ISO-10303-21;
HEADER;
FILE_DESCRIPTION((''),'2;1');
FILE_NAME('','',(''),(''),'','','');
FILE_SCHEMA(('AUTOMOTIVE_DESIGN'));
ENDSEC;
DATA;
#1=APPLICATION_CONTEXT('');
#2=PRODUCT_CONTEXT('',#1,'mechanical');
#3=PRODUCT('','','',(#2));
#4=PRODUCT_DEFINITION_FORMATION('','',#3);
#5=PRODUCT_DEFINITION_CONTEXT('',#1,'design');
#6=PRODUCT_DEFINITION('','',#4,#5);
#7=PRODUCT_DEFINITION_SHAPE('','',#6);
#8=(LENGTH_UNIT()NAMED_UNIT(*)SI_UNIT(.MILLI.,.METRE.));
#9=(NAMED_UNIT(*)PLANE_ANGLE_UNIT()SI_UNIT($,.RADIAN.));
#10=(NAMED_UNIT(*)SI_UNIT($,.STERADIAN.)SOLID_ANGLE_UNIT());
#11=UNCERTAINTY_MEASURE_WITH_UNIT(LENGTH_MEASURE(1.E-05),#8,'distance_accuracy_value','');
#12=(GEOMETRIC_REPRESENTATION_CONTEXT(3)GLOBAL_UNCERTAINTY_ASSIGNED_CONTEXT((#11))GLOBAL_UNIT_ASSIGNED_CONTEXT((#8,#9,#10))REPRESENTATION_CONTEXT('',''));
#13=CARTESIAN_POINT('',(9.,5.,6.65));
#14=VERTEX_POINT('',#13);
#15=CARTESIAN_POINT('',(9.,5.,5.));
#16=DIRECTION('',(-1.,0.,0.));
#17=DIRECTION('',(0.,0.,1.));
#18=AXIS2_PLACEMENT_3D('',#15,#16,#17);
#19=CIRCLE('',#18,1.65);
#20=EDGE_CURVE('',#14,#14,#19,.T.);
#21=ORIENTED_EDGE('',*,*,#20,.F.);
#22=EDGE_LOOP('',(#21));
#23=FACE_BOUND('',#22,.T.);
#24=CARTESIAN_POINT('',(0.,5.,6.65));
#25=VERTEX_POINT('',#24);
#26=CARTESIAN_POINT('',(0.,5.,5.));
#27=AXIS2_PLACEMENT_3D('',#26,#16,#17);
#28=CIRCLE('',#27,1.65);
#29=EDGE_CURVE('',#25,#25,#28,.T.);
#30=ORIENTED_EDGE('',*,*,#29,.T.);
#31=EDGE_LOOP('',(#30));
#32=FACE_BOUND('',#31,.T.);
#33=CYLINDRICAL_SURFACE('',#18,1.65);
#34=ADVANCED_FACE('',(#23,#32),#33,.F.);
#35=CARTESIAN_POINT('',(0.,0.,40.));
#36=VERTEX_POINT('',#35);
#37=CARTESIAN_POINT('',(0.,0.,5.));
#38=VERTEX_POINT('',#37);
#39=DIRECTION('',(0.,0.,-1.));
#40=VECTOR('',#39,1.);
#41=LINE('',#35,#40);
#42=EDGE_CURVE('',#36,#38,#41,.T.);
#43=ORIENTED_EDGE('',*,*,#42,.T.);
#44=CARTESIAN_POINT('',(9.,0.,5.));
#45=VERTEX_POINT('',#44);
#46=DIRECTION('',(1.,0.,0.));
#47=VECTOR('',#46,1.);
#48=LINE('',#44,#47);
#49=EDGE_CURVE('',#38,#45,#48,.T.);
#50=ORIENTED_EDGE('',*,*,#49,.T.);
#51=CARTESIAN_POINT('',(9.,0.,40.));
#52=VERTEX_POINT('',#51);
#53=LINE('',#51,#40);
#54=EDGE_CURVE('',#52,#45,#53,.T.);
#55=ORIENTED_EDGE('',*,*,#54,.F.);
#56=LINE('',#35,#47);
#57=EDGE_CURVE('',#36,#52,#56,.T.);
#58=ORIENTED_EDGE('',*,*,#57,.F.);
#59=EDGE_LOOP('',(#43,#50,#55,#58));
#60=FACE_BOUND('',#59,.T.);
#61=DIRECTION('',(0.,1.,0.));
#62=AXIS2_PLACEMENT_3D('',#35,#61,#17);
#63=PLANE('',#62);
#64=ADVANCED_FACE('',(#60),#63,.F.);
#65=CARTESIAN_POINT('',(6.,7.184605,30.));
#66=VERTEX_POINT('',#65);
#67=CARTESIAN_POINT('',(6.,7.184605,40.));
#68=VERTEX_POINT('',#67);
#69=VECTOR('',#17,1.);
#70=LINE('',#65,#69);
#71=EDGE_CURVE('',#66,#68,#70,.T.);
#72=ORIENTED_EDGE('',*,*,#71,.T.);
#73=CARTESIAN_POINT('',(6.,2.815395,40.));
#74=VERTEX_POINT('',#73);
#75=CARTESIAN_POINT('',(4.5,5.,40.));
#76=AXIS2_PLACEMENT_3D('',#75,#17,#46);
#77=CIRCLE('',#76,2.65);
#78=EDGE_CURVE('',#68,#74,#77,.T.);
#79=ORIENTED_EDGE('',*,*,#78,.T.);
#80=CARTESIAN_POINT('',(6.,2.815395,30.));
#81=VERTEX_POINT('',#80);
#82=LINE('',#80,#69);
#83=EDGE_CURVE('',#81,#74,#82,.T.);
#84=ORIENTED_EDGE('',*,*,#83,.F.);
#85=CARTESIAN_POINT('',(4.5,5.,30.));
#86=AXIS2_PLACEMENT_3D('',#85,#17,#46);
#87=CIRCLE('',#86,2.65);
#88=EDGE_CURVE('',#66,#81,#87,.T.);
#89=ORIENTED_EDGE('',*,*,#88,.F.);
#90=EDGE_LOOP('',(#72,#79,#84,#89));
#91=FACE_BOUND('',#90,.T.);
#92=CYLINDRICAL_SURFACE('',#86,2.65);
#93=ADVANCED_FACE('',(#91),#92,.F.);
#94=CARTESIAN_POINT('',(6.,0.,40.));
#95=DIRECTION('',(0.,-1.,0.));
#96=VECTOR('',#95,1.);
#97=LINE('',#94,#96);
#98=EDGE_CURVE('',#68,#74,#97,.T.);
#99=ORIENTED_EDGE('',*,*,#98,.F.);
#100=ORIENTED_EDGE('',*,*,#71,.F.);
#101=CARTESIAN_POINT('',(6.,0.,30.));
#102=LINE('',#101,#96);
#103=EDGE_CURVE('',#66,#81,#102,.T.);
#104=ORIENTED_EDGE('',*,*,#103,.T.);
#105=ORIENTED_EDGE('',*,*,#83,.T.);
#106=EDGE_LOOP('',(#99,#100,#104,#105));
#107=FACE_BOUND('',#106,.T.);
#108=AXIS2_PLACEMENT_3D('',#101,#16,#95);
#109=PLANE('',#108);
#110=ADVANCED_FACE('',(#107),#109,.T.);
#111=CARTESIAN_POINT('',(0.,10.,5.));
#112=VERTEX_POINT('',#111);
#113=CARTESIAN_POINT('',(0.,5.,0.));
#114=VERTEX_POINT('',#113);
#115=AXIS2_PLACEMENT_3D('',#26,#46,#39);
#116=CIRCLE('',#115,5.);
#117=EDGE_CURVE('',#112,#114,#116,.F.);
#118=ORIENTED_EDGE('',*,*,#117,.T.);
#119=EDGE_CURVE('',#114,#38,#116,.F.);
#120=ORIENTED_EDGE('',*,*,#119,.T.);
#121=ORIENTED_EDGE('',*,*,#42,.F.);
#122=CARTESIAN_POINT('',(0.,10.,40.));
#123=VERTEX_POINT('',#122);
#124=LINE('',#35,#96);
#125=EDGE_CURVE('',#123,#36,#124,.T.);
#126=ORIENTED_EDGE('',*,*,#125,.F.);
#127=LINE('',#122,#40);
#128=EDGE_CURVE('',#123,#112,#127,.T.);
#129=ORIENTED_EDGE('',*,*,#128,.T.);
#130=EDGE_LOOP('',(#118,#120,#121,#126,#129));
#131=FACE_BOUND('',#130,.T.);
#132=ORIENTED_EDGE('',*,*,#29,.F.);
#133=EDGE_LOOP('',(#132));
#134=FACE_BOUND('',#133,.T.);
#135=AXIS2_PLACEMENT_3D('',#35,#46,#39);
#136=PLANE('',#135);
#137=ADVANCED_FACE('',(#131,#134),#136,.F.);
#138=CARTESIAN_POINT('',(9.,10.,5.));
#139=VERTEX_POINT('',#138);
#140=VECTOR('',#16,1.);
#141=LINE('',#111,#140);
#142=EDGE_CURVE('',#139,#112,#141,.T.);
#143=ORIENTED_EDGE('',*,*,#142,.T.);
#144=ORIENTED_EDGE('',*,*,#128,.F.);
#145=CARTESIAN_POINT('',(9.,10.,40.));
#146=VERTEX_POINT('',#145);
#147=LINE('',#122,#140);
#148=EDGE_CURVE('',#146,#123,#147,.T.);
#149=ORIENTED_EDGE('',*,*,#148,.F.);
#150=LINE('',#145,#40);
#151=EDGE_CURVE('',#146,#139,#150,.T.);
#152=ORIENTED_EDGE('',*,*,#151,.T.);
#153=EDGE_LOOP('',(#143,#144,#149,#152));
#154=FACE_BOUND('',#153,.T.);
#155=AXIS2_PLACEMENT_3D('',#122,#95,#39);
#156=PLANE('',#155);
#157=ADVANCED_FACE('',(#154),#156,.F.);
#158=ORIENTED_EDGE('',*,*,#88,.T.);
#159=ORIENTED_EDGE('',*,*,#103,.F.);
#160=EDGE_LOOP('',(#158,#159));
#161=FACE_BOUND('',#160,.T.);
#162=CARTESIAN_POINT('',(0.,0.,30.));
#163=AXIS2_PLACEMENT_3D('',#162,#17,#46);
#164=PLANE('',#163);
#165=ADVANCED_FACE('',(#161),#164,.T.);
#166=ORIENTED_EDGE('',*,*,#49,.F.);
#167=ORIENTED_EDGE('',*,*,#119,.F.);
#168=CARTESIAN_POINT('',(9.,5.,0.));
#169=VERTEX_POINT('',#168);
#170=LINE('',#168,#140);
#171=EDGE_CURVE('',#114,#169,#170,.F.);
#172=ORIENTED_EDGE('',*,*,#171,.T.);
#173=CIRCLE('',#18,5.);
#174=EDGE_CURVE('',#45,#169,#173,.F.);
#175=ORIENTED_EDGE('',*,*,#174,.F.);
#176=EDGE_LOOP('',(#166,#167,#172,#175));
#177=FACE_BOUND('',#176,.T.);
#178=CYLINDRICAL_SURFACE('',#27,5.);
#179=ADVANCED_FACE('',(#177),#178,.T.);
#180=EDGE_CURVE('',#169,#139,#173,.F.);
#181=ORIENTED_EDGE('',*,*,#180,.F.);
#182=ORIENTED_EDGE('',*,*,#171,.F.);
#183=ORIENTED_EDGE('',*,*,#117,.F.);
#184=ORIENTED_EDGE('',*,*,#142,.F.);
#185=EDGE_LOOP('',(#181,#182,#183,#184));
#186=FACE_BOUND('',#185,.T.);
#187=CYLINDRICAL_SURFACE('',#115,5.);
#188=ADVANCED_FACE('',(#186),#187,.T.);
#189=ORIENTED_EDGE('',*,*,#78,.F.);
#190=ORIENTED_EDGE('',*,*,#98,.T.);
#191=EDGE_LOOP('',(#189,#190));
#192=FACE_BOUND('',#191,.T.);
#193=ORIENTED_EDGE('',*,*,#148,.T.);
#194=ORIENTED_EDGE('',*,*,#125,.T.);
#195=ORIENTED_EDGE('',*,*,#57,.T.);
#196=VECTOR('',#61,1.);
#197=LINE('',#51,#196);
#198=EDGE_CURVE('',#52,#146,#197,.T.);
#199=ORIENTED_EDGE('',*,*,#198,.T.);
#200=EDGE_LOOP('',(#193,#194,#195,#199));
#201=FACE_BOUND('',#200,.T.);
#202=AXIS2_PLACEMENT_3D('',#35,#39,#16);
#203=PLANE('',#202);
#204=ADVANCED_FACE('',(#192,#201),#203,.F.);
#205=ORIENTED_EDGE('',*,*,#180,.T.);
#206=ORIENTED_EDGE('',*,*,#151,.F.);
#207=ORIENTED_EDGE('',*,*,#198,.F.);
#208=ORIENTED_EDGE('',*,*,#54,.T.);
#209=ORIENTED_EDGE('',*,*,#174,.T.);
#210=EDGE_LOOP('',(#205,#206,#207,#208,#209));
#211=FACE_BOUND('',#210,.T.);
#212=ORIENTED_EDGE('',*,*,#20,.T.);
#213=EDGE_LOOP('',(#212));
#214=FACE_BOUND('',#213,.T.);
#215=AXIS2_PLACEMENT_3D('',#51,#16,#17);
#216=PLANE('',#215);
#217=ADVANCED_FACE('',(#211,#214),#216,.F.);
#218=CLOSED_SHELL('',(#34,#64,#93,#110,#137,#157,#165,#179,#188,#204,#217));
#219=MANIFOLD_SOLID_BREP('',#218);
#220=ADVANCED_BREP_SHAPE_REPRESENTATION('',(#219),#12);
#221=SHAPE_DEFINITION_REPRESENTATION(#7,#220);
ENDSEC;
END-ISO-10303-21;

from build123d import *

# Parameters (mm, degrees)
SKIZZE1_W                       = 9
SKIZZE1_H                       = 10
AUFSATZ_LINEAR_AUSTRAGEN1_DEPTH = 40
SKIZZE3_R                       = 1.65
SCHNITT_LINEAR_AUSTRAGEN2_DEPTH = 43.201895692
VERRUNDUNG1_R                   = 5
SCHNITT_LINEAR_AUSTRAGEN3_DEPTH = 10


with BuildPart() as part:
    # Skizze1 → Aufsatz-Linear austragen1 (new body)
    with BuildSketch(Plane.XY):
        with Locations((4.5, 5)):
            Rectangle(SKIZZE1_W, SKIZZE1_H)
    extrude(amount=AUFSATZ_LINEAR_AUSTRAGEN1_DEPTH)

    # Skizze3 → Schnitt-Linear austragen2 (cut, through all)
    with BuildSketch(Plane.ZY):
        with Locations((5, 5)):
            Circle(SKIZZE3_R)
    extrude(amount=-SCHNITT_LINEAR_AUSTRAGEN2_DEPTH, mode=Mode.SUBTRACT)

    # Verrundung1
    verrundung1_edges = [part.edges().sort_by_distance(p)[0] for p in [
        (4.5, 0, 0),
        (4.5, 10, 0),
    ]]
    fillet(verrundung1_edges, radius=VERRUNDUNG1_R - 0.0001)  # a hair under: the kernel refuses the full size

    # Skizze4 → Schnitt-Linear austragen3 (cut)
    with BuildSketch(Plane.XY.offset(40)):
        with BuildLine():
            Line((6, 2.815394773), (6, 7.184605227))
            ThreePointArc((6, 7.184605227), (1.85, 5), (6, 2.815394773))
        make_face()
    extrude(amount=-SCHNITT_LINEAR_AUSTRAGEN3_DEPTH, mode=Mode.SUBTRACT)


solid = part.part
